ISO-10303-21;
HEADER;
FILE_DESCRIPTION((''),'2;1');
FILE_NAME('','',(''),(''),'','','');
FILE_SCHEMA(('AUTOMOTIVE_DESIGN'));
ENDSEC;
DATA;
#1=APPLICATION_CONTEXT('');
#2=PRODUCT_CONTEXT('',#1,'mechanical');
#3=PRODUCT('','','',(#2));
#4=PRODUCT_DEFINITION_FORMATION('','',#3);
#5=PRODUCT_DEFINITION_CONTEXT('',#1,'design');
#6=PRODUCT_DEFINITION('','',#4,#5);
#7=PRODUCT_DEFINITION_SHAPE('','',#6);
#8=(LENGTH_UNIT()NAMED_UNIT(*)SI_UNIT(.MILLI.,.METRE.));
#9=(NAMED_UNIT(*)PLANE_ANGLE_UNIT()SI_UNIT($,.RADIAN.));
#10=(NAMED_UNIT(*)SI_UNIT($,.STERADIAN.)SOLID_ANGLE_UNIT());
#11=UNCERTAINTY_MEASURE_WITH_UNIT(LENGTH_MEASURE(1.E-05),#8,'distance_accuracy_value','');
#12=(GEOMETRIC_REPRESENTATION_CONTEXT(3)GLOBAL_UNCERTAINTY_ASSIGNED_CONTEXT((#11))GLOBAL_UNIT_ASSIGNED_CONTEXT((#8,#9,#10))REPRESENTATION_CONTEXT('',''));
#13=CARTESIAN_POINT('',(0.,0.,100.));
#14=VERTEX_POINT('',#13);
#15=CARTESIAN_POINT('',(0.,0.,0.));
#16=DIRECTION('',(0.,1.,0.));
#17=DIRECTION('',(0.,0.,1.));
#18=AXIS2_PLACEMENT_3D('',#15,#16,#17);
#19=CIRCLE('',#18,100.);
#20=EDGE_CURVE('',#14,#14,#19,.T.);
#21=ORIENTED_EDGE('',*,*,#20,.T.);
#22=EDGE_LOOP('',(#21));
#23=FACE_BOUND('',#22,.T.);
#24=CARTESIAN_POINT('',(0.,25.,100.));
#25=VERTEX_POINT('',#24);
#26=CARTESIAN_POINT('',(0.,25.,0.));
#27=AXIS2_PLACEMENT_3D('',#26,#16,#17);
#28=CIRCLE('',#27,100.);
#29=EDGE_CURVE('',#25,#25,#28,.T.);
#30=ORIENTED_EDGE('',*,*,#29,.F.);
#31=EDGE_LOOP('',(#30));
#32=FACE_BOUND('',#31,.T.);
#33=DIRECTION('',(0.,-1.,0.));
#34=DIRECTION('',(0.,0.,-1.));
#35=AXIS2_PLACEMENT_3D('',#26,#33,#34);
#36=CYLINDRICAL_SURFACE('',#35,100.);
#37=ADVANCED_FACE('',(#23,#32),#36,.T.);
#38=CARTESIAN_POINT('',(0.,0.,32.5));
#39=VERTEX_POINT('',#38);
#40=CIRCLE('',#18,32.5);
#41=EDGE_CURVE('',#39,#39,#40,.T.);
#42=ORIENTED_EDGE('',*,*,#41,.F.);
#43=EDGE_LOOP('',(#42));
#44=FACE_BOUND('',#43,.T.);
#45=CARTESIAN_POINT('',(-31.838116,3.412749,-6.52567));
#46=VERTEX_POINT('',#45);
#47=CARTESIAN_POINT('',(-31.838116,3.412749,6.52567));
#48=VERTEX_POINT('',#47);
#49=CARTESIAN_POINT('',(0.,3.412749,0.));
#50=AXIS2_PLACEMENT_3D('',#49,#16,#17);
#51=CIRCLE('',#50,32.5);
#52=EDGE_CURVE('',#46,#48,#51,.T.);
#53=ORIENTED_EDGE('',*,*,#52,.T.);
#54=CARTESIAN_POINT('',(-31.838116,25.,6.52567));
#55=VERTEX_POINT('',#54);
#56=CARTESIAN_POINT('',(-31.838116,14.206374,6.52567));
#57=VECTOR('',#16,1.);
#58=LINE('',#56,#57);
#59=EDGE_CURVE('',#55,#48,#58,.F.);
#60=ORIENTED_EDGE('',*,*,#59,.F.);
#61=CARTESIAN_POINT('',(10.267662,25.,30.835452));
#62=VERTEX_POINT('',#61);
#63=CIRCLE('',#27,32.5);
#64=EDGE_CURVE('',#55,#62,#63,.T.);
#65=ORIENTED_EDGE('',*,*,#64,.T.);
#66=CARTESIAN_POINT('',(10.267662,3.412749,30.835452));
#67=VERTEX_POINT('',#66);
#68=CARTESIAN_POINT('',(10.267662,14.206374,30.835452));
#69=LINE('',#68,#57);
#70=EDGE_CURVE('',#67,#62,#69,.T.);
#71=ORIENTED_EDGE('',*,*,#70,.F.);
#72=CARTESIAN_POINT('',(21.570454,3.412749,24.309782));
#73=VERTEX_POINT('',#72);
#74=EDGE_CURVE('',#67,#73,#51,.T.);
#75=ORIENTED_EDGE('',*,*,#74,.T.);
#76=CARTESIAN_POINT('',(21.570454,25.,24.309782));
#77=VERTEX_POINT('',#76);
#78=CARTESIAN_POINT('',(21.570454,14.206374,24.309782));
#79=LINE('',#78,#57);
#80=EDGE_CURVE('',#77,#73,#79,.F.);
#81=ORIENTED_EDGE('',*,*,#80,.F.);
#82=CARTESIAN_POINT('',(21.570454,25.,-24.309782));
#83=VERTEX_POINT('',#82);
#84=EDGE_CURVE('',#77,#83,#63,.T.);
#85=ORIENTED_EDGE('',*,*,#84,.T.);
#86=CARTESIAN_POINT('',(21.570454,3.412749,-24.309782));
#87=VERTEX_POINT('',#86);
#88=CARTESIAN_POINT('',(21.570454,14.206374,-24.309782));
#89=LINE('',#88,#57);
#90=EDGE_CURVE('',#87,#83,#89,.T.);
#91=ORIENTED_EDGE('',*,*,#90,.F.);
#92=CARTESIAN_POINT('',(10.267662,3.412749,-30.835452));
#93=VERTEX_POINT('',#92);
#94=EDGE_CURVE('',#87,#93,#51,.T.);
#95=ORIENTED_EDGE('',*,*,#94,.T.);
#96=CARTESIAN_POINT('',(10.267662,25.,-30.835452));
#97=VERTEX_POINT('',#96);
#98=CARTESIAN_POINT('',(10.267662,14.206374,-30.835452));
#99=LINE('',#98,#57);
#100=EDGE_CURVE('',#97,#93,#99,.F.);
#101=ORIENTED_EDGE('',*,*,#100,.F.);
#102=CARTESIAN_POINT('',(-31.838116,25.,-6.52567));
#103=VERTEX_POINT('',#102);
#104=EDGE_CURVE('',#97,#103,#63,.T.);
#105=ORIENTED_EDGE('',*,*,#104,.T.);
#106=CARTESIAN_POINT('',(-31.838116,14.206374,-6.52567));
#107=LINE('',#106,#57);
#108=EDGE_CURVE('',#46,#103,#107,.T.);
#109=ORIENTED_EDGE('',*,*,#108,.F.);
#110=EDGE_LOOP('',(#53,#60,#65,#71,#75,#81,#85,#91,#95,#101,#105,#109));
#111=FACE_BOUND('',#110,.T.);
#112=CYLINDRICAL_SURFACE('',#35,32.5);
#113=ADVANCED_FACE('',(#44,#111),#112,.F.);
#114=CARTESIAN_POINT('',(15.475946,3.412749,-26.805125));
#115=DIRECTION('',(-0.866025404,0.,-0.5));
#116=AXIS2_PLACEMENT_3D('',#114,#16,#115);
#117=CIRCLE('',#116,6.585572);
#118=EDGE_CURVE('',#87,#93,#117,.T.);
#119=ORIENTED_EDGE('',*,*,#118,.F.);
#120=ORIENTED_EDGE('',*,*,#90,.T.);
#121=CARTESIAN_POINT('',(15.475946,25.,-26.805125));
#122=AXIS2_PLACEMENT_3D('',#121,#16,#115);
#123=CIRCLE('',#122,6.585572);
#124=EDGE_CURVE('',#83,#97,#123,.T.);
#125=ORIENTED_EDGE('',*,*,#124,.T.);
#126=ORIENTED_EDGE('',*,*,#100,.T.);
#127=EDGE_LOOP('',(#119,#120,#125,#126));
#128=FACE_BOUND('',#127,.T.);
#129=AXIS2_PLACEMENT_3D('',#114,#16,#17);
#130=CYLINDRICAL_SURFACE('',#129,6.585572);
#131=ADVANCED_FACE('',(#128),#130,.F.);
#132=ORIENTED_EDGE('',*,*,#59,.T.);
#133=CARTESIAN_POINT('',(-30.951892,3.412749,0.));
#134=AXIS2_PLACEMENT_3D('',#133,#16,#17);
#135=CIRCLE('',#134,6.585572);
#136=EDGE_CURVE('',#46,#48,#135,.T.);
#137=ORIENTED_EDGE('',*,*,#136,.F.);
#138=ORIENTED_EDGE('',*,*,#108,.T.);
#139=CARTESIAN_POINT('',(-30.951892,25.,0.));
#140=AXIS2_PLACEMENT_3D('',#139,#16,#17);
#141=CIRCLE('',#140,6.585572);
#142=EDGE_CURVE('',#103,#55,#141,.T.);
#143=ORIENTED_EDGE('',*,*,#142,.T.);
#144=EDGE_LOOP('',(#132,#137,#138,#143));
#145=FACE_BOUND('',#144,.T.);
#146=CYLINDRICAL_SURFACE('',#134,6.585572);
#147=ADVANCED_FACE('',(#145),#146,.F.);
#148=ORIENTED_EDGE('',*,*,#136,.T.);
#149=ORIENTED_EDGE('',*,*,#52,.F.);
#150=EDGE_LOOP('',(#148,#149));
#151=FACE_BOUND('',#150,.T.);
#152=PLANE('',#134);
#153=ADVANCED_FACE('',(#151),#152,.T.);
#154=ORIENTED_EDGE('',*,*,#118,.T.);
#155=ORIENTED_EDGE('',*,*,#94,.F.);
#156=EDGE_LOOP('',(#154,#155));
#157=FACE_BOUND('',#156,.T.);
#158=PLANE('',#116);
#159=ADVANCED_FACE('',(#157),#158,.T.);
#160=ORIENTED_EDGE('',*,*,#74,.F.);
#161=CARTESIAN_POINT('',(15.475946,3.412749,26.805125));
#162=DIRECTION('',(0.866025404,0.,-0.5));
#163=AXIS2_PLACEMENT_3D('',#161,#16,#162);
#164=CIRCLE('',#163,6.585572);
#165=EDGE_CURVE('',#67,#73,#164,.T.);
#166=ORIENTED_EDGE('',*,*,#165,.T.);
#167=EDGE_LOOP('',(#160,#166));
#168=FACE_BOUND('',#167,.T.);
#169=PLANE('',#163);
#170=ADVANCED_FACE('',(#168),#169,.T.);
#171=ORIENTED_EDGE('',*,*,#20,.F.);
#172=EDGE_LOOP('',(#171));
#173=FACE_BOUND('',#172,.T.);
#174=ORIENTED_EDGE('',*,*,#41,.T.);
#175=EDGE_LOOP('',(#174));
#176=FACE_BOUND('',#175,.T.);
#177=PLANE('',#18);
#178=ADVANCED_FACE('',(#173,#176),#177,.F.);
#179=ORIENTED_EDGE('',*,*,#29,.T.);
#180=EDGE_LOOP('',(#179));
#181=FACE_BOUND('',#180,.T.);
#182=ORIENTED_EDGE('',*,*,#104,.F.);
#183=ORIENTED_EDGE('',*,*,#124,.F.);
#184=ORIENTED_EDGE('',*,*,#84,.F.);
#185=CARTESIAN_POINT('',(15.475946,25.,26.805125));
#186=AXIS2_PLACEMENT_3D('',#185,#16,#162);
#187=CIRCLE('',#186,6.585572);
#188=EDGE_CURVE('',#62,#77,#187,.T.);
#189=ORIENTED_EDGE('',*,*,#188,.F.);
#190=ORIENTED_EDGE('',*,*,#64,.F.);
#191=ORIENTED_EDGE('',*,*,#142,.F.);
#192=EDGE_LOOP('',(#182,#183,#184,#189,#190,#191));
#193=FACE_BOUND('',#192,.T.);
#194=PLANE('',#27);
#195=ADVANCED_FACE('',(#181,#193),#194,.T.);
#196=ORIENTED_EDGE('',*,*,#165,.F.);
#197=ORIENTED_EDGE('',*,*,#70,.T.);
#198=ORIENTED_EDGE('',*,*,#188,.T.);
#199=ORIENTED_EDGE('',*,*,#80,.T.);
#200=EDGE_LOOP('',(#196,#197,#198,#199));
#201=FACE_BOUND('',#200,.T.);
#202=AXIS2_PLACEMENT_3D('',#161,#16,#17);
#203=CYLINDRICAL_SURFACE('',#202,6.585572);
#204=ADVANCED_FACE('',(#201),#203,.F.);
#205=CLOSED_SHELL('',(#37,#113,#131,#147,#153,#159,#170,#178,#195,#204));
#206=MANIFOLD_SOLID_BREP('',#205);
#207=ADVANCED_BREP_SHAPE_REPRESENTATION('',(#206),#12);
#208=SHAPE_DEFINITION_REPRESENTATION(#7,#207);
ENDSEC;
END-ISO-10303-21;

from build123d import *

# Parameters (mm, degrees)
SKETCH1_R           = 100
BOSS_EXTRUDE1_DEPTH = 25
SKETCH2_R           = 32.5
CUT_EXTRUDE1_DEPTH  = 144.614066163
SKETCH3_R           = 6.585572089
CUT_EXTRUDE2_DEPTH  = 21.587251006
CIRPATTERN1_COUNT   = 3


with BuildPart() as part:
    # Sketch1 → Boss-Extrude1 (new body)
    with BuildSketch(Plane(origin=(0, 0, 0), x_dir=(1, 0, 0), z_dir=(0, 1, 0))):
        Circle(SKETCH1_R)
    extrude(amount=BOSS_EXTRUDE1_DEPTH)

    # Sketch2 → Cut-Extrude1 (cut, through all)
    with BuildSketch(Plane(origin=(0, 0, 0), x_dir=(1, 0, 0), z_dir=(0, 1, 0))):
        Circle(SKETCH2_R)
    extrude(amount=CUT_EXTRUDE1_DEPTH, mode=Mode.SUBTRACT)

    # Sketch3 → Cut-Extrude2 (cut)
    with BuildSketch(Plane(origin=(0, 25, 0), x_dir=(1, 0, 0), z_dir=(0, 1, 0))):
        with Locations((-30.951891748, 0)):
            Circle(SKETCH3_R)
    cut_extrude2 = extrude(amount=-CUT_EXTRUDE2_DEPTH, mode=Mode.SUBTRACT)

    # CirPattern1: Cut-Extrude2 ×3 about axis
    cirpattern1_axis = Axis((0, 0, 0), (0, 1, 0))
    for i in range(1, CIRPATTERN1_COUNT):
        add(cut_extrude2.rotate(cirpattern1_axis, i * 360 / CIRPATTERN1_COUNT), mode=Mode.SUBTRACT)


solid = part.part
